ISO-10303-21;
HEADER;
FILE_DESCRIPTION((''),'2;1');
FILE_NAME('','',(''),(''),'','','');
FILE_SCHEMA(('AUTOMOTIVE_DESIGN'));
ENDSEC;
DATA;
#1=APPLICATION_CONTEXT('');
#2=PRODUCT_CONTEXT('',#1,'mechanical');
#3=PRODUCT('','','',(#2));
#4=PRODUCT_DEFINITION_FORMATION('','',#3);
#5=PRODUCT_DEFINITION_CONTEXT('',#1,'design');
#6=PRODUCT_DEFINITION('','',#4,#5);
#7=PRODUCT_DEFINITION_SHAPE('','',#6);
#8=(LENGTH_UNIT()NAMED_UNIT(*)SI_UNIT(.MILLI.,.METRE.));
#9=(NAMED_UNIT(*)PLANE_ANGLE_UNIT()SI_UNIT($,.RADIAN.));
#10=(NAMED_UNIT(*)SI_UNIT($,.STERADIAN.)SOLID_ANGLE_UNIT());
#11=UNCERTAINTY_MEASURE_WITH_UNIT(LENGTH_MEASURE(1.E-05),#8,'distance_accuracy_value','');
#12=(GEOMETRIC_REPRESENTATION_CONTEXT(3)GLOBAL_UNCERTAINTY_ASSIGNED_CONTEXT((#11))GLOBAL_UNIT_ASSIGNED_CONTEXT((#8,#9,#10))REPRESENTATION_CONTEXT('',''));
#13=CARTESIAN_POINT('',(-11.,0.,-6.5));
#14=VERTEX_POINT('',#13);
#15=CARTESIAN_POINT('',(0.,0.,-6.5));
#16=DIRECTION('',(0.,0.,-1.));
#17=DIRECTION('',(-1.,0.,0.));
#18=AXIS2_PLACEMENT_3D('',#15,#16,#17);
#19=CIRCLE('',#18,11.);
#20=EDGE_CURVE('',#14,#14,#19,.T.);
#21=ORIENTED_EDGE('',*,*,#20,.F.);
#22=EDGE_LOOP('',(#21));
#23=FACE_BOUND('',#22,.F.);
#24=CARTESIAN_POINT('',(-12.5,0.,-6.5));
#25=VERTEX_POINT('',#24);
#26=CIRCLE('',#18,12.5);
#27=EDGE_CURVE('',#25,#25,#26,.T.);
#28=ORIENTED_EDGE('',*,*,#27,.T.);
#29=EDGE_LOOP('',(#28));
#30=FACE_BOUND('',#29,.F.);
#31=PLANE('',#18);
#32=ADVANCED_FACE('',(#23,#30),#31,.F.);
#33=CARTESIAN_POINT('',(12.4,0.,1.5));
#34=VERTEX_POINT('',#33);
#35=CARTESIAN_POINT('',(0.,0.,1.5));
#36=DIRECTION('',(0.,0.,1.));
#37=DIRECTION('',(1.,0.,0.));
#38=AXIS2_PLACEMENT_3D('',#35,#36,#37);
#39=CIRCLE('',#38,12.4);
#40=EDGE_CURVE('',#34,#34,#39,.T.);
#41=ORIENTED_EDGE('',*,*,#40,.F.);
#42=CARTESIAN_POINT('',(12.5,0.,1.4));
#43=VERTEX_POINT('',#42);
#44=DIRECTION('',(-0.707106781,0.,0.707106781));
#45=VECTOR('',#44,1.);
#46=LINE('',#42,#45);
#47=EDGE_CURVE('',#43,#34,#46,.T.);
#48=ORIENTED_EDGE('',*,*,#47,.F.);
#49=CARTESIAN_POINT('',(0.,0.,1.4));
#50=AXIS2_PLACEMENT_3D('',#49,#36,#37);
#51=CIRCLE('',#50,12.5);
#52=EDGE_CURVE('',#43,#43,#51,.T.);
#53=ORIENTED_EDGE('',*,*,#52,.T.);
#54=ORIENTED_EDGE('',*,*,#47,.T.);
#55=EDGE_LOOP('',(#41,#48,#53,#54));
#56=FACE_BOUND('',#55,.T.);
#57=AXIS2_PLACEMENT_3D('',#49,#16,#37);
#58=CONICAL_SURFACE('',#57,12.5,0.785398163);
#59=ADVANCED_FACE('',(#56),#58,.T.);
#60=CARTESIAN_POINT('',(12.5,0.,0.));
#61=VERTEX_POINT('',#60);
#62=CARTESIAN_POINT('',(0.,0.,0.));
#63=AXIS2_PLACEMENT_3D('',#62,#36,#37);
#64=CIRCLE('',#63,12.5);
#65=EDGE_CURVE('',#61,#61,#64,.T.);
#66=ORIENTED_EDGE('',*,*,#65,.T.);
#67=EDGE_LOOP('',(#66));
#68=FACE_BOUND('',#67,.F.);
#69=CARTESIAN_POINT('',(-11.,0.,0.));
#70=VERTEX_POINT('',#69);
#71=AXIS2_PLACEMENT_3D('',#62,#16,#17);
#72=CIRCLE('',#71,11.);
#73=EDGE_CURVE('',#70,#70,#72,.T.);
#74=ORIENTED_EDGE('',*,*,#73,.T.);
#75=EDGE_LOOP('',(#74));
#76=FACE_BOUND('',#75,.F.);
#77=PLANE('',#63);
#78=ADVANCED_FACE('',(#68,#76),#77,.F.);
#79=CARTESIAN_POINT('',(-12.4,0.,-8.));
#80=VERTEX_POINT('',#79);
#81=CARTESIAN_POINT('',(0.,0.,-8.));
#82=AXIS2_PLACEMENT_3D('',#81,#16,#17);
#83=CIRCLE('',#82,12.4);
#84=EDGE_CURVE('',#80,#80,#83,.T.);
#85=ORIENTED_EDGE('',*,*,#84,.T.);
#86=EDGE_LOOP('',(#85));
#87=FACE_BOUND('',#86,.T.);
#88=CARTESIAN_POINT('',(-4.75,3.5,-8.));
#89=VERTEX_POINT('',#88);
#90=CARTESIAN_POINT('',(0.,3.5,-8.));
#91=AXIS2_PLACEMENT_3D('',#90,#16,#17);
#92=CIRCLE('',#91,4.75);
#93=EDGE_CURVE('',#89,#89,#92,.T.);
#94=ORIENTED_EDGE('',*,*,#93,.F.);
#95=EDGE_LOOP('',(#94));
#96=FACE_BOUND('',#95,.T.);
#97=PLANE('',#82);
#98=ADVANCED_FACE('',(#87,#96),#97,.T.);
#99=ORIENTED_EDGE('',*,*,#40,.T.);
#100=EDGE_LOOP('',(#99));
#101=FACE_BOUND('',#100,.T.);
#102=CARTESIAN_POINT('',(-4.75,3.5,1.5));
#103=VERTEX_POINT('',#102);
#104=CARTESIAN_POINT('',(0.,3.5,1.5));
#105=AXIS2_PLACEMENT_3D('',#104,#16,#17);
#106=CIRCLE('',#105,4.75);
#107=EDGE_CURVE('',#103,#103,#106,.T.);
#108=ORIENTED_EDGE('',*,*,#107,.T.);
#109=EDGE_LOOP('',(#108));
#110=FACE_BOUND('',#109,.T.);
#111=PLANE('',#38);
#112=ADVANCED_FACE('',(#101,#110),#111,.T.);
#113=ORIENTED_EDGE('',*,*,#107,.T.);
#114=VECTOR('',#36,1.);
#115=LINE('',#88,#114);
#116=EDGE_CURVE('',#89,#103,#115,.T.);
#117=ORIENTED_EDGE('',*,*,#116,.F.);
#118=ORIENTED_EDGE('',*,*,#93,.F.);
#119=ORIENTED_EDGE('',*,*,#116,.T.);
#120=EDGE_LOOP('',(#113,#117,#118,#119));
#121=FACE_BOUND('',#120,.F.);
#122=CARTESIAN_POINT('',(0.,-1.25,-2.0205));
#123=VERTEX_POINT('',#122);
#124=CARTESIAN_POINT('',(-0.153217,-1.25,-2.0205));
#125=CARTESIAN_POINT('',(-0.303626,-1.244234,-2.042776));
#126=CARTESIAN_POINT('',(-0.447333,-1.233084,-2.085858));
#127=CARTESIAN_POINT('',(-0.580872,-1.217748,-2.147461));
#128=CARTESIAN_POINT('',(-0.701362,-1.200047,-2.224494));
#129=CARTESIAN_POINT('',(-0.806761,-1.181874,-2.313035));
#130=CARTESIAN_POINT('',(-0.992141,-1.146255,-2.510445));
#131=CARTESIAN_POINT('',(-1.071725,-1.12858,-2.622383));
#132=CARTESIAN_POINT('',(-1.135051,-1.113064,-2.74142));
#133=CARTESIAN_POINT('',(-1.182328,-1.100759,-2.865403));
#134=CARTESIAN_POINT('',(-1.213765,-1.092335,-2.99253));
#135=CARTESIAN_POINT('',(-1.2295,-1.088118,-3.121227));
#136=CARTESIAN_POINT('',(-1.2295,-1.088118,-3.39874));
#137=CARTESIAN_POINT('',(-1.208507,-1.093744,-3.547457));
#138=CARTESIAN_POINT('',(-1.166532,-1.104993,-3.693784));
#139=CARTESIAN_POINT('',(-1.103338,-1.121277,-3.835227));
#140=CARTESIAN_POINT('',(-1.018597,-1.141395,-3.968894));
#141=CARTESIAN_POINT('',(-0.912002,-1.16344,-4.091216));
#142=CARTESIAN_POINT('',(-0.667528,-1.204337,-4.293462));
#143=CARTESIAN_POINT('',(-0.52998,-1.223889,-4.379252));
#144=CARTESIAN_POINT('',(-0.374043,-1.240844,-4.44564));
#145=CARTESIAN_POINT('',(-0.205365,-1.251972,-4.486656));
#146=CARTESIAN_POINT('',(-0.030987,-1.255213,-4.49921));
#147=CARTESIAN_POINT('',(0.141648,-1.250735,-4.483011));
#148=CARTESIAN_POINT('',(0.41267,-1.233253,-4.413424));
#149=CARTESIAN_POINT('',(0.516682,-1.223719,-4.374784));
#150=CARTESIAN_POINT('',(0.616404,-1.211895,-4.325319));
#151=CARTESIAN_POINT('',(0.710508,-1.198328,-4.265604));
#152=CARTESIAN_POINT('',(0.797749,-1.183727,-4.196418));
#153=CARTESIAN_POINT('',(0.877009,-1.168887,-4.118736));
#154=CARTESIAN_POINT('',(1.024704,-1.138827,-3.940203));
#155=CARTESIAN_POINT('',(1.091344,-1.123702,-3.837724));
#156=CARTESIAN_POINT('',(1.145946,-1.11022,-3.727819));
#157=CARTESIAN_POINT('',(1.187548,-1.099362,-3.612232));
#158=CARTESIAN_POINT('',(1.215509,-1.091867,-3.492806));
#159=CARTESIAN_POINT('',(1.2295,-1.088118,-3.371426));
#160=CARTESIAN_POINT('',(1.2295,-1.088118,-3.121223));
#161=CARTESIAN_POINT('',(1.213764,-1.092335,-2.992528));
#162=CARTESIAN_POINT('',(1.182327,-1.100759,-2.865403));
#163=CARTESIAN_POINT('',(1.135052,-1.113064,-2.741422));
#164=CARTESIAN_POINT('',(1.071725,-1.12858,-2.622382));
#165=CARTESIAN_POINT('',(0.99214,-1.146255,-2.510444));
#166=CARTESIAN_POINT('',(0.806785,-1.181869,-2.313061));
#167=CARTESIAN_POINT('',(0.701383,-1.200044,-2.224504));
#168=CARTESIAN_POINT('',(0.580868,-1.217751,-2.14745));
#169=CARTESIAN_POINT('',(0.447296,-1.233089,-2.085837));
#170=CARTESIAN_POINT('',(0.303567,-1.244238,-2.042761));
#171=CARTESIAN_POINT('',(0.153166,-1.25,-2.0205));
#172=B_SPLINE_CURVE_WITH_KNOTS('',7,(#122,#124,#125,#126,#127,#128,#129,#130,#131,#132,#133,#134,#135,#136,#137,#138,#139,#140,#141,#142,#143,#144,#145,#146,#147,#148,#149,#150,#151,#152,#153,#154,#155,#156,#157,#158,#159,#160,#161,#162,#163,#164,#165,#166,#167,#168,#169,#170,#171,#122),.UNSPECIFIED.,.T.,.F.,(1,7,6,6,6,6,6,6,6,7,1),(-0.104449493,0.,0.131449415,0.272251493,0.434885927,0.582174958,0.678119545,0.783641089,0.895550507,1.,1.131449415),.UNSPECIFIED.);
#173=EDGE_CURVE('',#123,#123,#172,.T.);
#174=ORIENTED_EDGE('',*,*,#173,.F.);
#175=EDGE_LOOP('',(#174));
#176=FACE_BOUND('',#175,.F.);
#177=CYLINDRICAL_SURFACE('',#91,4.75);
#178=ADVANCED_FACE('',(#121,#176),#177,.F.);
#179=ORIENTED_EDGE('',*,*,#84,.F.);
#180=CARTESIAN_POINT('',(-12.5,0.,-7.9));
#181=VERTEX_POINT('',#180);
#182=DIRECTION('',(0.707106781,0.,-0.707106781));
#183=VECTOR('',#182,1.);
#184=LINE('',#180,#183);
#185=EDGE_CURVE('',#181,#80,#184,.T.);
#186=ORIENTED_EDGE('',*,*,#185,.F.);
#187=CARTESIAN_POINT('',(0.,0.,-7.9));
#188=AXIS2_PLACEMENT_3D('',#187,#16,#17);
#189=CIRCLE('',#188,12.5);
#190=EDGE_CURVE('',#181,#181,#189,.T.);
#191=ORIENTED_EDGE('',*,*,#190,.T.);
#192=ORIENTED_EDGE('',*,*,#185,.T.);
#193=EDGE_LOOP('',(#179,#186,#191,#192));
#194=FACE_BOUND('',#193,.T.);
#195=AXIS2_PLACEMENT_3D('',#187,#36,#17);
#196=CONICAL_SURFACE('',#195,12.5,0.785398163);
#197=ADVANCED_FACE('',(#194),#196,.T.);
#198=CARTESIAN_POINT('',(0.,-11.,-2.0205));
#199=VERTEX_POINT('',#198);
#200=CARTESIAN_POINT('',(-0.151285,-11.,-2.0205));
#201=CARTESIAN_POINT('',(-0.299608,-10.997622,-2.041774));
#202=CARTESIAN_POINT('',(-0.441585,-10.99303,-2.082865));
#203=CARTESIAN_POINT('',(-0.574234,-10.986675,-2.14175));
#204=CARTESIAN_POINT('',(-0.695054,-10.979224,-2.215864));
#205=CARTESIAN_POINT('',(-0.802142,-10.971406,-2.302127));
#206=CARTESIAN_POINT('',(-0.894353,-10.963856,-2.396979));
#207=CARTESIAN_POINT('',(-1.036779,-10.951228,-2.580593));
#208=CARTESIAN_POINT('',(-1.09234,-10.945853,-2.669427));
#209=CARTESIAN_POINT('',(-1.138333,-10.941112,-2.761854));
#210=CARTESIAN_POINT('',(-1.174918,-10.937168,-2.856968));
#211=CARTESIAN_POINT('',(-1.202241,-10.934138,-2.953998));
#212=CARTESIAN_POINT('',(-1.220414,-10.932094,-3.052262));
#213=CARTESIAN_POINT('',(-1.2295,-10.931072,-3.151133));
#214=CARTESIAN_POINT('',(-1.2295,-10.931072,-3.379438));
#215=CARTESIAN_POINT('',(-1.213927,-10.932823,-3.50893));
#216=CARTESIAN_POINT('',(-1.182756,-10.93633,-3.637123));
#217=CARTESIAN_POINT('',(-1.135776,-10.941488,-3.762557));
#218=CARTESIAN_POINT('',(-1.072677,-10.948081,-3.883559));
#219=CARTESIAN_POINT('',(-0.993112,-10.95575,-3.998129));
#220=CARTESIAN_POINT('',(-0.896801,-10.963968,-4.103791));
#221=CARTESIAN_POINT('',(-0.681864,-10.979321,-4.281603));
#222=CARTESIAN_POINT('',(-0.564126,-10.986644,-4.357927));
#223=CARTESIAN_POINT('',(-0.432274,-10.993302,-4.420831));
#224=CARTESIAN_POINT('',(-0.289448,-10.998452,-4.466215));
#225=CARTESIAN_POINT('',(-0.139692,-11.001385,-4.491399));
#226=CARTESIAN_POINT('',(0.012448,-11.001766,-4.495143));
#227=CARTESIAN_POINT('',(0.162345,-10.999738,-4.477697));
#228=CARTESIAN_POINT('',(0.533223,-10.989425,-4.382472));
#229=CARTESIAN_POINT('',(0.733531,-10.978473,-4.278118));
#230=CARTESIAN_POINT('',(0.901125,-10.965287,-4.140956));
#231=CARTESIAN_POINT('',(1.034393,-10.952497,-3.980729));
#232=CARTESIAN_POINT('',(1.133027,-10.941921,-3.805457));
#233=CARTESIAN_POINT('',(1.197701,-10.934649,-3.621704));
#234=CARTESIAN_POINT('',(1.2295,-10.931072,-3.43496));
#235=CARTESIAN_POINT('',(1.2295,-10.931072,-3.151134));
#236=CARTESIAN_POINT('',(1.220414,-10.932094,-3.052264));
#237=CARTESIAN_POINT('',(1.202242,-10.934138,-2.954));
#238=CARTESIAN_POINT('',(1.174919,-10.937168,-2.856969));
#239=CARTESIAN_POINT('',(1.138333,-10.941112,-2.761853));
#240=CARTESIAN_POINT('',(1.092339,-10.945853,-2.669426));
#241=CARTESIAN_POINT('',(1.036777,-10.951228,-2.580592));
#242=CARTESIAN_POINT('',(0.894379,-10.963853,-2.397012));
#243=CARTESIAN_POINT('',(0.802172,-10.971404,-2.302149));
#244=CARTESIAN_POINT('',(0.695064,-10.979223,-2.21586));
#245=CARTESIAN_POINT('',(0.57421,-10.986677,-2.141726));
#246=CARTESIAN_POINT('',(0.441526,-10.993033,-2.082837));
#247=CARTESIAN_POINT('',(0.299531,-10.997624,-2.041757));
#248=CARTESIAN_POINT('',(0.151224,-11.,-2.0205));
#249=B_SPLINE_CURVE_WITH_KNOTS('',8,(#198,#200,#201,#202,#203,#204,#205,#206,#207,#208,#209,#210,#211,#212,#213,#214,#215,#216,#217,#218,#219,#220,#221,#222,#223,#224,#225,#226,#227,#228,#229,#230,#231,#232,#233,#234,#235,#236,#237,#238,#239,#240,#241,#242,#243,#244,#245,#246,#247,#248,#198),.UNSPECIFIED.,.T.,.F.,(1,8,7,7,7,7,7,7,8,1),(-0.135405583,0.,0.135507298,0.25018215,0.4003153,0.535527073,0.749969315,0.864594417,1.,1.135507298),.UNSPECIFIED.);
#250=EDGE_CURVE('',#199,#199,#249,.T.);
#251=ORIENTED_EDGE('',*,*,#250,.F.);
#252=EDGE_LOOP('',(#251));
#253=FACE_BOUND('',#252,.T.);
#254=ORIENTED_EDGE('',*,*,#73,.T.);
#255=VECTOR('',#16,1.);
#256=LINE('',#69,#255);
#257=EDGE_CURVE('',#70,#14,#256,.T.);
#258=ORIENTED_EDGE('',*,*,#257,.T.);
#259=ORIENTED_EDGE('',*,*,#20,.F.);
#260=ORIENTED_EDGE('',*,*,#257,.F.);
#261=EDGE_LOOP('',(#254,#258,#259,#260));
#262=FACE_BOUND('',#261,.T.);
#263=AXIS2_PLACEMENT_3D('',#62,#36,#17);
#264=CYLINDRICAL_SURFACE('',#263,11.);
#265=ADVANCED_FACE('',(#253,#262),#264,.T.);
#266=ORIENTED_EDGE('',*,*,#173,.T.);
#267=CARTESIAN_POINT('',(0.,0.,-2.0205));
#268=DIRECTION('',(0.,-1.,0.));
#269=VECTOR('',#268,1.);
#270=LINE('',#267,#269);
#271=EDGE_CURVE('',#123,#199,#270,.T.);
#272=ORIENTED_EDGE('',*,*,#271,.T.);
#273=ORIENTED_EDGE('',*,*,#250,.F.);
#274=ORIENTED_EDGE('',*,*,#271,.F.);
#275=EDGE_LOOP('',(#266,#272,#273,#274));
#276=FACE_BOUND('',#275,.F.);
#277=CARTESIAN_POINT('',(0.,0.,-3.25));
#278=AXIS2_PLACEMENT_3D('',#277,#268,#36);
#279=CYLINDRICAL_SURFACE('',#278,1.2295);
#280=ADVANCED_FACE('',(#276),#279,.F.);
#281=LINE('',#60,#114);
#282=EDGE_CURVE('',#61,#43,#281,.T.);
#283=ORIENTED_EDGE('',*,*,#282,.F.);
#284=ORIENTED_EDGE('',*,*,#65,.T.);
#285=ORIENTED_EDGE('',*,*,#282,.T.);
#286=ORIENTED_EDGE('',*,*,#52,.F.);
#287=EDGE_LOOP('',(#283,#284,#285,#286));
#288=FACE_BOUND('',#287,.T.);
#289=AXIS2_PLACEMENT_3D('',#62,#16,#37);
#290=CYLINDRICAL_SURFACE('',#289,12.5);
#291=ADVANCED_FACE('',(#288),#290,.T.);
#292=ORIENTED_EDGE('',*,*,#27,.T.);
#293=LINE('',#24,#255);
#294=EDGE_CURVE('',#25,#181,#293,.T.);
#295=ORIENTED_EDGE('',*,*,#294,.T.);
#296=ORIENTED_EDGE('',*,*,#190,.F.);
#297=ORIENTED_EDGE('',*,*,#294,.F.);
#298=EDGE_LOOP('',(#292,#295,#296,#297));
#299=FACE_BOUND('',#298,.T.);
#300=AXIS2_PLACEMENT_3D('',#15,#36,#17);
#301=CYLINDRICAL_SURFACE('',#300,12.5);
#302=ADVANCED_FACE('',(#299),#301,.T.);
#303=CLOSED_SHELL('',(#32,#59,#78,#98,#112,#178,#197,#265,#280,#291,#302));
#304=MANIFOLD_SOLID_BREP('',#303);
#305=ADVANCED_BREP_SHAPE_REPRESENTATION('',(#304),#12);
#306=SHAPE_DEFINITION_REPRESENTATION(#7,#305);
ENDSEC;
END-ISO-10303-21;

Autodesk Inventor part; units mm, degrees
ref_plane "YZ Plane" through (0, 0, 0) normal (1, 0, 0) x (0, 1, 0)
ref_plane "XZ Plane" through (0, 0, 0) normal (0, 1, 0) x (-1, 0, 0)
ref_plane "XY Plane" through (0, 0, 0) normal (0, 0, 1) x (1, 0, 0)
sketch "Sketch1" plane through (0, 0, 0) normal (0, 0, 1) x (1, 0, 0)
  circle A0 centre (0, 0) radius 12.5
  dimension "d0" = 25
extrude "Extrusion1" add sketch "Sketch1" along normal blind 1.5
sketch "Sketch2" plane through (0, 0, 0) normal (0, 0, -1) x (-1, 0, 0)
  circle A0 centre (0, 0) radius 12.5 projected
  circle A1 centre (0, 0) radius 11
  dimension "d3" = 22
extrude "Extrusion2" add sketch "Sketch2" along normal blind 6.5 contours A1
sketch "Sketch3" plane through (0, 0, -6.5) normal (0, 0, -1) x (-1, 0, 0)
  circle A0 centre (0, 0) radius 11 projected
  circle A1 centre (0, 0) radius 12.5
  dimension "d6" = 25
extrude "Extrusion3" add sketch "Sketch3" along normal blind 1.5 contours A0 | A1
sketch "Sketch4" plane through (0, 0, -8) normal (0, 0, -1) x (-1, 0, 0)
  circle A0 centre (0, 0) radius 12.5 projected
  circle A1 centre (0, 3.5) radius 4.75
  dimension "d9" = 3.5
  dimension "d10" = 9.5
extrude "Extrusion4" cut sketch "Sketch4" against normal through all contours A1
sketch "Sketch6" plane through (0, 0, 0) normal (0, 1, 0) x (-1, 0, 0)
  line L0 (11, 0) -> (11, -6.5) projected
  line L1 (-11, 0) -> (-11, -6.5) projected
  line L2 (-12.5, -6.5) -> (12.5, -6.5) projected
  point P0 (0, 0)
  point P1 (0, -3.25)
  point P2 (11, -3.25)
  dimension "d18" = 11
  dimension "d19" = 3.25
hole "Hole1" at (0, 0, -3.25) direction (0, -1, 0) diameter 2.459 end through all thread size "M3x0.5" class "6H" standard "ANSI Metric M Profile"
chamfer "Chamfer1" distance 0.1 angle 45 2 edges at (12.5, 0, -8) (-12.5, 0, 1.5)
properties part number "28 - Eccentric  Sheav" material "Steel AISI 1020 108 ANLD"
